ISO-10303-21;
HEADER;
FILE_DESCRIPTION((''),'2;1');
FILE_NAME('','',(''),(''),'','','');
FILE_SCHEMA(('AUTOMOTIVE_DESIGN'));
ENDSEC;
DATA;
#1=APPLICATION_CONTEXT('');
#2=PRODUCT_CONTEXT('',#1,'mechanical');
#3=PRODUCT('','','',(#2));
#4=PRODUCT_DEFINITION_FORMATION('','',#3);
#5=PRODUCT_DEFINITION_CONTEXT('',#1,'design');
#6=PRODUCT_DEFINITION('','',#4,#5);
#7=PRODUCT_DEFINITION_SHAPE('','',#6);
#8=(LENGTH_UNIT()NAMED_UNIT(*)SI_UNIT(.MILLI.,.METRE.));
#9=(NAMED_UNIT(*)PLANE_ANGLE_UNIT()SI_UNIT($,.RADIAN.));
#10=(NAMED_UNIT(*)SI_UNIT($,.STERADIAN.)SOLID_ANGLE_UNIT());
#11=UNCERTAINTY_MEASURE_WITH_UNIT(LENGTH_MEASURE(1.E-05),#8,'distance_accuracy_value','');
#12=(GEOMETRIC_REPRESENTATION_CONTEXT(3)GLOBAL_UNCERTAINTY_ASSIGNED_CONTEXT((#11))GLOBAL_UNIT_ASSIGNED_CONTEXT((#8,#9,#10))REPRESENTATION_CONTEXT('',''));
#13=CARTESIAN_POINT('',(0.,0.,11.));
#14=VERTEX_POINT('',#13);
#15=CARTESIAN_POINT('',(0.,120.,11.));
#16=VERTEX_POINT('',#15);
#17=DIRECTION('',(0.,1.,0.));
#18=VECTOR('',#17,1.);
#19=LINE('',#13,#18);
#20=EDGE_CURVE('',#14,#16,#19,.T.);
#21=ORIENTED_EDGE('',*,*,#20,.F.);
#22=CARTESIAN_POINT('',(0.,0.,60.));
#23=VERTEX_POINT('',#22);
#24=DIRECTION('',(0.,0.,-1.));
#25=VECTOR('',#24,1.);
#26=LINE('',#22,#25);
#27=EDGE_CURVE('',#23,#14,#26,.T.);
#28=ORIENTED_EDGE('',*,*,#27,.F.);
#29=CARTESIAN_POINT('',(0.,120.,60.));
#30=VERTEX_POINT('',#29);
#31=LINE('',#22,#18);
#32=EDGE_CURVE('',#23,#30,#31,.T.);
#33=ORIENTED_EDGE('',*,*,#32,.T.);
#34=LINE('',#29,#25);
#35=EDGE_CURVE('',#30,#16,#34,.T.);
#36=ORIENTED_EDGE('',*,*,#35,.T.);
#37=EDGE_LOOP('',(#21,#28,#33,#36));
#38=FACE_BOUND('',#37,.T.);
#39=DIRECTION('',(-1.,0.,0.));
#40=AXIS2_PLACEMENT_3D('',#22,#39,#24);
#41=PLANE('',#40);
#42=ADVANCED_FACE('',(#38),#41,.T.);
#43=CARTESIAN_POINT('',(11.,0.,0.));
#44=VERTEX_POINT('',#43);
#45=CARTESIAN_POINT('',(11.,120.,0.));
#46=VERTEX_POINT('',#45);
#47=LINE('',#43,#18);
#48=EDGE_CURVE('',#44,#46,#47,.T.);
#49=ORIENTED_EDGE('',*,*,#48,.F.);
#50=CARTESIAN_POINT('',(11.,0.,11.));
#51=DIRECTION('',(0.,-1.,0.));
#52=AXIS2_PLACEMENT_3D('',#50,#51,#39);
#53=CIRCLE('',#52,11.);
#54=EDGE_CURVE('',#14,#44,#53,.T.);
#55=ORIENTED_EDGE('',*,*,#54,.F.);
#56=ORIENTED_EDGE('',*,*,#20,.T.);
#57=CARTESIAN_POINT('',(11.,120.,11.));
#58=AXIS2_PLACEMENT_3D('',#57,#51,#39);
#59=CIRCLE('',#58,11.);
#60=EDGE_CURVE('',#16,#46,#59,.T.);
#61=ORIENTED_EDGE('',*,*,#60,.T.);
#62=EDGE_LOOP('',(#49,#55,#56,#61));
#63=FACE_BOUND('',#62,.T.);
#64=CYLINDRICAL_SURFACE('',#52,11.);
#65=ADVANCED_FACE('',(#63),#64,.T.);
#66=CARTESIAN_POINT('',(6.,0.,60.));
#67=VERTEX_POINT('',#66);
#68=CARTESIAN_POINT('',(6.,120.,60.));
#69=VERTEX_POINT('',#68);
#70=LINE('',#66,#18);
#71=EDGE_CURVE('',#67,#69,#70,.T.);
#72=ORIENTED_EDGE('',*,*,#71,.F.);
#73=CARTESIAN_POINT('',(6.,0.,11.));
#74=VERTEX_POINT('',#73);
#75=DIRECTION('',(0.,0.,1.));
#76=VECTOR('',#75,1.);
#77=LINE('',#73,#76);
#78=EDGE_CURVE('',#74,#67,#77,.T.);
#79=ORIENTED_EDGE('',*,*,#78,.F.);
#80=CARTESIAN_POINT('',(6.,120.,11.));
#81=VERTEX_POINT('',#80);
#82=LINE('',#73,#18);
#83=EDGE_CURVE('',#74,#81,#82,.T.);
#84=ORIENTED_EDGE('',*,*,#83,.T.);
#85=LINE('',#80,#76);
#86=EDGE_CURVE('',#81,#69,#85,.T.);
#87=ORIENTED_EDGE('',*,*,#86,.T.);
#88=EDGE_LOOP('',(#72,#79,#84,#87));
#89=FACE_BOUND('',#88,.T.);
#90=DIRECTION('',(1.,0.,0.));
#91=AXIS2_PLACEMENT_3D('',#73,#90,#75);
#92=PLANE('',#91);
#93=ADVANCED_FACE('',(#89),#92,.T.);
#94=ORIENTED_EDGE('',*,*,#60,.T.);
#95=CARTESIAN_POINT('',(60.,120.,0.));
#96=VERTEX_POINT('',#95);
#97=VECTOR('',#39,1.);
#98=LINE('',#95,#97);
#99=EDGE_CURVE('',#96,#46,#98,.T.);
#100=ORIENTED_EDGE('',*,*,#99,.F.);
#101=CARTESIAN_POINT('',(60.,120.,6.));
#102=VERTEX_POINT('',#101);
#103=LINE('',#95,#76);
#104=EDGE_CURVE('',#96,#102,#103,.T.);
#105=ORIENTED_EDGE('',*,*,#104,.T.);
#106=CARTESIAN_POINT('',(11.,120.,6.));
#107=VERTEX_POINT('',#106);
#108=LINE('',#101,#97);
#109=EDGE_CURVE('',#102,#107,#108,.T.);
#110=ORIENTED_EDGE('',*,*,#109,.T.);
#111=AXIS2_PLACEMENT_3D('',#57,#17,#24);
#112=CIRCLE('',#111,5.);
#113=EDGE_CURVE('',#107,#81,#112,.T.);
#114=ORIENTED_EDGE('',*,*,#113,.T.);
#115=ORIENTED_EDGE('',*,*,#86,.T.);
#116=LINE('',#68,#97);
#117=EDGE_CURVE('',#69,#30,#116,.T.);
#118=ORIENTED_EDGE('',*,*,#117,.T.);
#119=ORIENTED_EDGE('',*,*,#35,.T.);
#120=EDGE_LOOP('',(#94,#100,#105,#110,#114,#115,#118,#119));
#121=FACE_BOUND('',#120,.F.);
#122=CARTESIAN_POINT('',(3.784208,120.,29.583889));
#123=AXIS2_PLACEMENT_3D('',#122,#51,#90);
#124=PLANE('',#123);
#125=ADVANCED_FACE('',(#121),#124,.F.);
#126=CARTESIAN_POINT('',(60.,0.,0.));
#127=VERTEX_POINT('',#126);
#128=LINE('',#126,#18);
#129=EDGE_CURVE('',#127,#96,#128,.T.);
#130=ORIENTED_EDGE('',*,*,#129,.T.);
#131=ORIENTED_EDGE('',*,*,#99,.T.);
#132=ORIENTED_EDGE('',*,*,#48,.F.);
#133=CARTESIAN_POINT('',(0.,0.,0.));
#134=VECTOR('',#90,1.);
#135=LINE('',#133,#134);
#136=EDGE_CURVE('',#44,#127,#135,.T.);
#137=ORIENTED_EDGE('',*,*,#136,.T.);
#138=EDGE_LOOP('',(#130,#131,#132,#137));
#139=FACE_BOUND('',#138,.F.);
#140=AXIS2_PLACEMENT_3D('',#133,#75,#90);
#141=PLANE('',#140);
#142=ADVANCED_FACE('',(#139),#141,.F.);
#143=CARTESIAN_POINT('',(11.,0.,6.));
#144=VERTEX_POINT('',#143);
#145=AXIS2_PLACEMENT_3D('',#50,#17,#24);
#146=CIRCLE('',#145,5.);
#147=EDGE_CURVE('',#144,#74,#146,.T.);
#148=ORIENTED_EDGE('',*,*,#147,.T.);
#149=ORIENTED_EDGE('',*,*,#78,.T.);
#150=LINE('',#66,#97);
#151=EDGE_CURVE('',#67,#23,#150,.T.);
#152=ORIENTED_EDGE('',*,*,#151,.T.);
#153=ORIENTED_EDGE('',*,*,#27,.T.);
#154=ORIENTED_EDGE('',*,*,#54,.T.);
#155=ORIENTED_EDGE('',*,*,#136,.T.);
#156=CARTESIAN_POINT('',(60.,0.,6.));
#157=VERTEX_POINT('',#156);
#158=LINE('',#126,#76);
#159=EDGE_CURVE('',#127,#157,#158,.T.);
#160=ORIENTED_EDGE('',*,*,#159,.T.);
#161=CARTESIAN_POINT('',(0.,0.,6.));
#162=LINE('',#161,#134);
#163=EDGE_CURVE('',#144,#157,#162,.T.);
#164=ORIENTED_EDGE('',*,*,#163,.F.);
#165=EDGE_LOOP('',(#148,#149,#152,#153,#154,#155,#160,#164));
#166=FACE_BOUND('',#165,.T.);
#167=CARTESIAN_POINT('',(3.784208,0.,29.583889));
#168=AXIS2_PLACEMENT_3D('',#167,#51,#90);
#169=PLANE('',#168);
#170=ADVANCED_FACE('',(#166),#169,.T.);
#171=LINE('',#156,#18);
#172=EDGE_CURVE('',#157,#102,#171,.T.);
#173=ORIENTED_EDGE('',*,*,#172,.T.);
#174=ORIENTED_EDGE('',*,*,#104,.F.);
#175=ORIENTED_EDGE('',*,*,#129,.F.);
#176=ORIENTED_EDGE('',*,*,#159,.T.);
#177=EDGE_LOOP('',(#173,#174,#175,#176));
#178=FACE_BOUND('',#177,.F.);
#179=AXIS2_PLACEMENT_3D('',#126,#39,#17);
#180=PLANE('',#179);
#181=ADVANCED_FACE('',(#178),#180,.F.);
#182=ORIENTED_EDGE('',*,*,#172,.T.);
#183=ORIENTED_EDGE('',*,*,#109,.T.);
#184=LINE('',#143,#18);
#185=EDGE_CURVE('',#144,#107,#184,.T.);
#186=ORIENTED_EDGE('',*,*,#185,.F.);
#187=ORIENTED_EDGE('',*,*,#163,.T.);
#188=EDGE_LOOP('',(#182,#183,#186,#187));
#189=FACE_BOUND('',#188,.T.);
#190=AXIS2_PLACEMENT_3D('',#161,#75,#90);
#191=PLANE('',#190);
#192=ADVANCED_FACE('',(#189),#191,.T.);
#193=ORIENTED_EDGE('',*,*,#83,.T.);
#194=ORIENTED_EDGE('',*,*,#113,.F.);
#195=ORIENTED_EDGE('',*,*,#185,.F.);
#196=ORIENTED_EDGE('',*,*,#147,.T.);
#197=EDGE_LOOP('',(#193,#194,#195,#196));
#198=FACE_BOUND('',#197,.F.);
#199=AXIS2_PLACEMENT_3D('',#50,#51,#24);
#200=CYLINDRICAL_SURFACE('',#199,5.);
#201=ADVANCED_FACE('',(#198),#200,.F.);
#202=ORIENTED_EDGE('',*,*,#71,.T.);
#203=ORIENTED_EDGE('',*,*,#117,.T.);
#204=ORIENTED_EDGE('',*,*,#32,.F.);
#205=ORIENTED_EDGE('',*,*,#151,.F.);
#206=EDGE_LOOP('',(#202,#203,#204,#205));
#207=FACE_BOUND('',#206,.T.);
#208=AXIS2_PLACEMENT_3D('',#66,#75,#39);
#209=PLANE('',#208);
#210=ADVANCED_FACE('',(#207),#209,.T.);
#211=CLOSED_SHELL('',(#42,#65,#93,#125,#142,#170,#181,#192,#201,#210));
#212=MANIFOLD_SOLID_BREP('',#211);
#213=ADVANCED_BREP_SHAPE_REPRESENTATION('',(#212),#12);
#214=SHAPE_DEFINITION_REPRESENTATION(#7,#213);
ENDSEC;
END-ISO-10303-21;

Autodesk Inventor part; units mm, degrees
ref_plane "YZ Plane" through (0, 0, 0) normal (1, 0, 0) x (0, 1, 0)
ref_plane "XZ Plane" through (0, 0, 0) normal (0, 1, 0) x (-1, 0, 0)
ref_plane "XY Plane" through (0, 0, 0) normal (0, 0, 1) x (1, 0, 0)
sketch "Sketch6" plane through (0, 0, 0) normal (0, 0, 1) x (1, 0, 0)
  line L0 (0, 0) -> (60, 0)
  line L1 (60, 0) -> (60, 120)
  line L2 (60, 120) -> (0, 120)
  line L3 (0, 120) -> (0, 0)
  dimension "d47" = 60
  dimension "d48" = 120
extrude "Plate3" add sketch "Sketch6" along normal blind 6
sketch "Sketch7" plane through (6, 0, 0) normal (-1, 0, 0) x (0, -1, 0)
  line L0 (-120, 0) -> (0, 0)
  line L1 (0, 0) -> (0, 60)
  line L2 (0, 60) -> (-120, 60)
  line L3 (-120, 60) -> (-120, 0)
edge flange "Flange2" height 60 angle 90 thickness 6 bend radius 5 thickness toward (-1, 0, 0) relief round relief width 6 relief depth 3 edges at (0, 60, 6) wall of the first edge with corners at (6, 120, 0) (6, 0, 0) (6, 0, 60) (6, 120, 60)
bend "Bend2"
corner "Corner2"
equation "\"d46\" = Thickness"
equation "\"d49\" = BendReliefWidth"
equation "\"d50\" = BendReliefDepth"
equation "\"d51\" = MinimumRemnant"
equation "\"d52\" = TransitionRadius"
equation "\"d55\" = BendRadius"
equation "\"d56\" = CornerReliefSize"
equation "\"d57\" = GapSize"
equation "\"d58\" = JacobiRadiusSize"
equation "\"BendReliefWidth\" = Thickness"
equation "\"BendReliefDepth\" = 0.5 * Thickness"
equation "\"CornerReliefSize\" = 4 * Thickness"
equation "\"MinimumRemnant\" = 2 * Thickness"
equation "\"TransitionRadius\" = BendRadius"
equation "\"JacobiRadiusSize\" = BendRadius"
equation "\"GapSize\" = Thickness"
equation "\"Thickness\" = 6"
equation "\"BendRadius\" = 5"
properties part number "GnG frame 4.2 reinf" material "Stainless Steel"
